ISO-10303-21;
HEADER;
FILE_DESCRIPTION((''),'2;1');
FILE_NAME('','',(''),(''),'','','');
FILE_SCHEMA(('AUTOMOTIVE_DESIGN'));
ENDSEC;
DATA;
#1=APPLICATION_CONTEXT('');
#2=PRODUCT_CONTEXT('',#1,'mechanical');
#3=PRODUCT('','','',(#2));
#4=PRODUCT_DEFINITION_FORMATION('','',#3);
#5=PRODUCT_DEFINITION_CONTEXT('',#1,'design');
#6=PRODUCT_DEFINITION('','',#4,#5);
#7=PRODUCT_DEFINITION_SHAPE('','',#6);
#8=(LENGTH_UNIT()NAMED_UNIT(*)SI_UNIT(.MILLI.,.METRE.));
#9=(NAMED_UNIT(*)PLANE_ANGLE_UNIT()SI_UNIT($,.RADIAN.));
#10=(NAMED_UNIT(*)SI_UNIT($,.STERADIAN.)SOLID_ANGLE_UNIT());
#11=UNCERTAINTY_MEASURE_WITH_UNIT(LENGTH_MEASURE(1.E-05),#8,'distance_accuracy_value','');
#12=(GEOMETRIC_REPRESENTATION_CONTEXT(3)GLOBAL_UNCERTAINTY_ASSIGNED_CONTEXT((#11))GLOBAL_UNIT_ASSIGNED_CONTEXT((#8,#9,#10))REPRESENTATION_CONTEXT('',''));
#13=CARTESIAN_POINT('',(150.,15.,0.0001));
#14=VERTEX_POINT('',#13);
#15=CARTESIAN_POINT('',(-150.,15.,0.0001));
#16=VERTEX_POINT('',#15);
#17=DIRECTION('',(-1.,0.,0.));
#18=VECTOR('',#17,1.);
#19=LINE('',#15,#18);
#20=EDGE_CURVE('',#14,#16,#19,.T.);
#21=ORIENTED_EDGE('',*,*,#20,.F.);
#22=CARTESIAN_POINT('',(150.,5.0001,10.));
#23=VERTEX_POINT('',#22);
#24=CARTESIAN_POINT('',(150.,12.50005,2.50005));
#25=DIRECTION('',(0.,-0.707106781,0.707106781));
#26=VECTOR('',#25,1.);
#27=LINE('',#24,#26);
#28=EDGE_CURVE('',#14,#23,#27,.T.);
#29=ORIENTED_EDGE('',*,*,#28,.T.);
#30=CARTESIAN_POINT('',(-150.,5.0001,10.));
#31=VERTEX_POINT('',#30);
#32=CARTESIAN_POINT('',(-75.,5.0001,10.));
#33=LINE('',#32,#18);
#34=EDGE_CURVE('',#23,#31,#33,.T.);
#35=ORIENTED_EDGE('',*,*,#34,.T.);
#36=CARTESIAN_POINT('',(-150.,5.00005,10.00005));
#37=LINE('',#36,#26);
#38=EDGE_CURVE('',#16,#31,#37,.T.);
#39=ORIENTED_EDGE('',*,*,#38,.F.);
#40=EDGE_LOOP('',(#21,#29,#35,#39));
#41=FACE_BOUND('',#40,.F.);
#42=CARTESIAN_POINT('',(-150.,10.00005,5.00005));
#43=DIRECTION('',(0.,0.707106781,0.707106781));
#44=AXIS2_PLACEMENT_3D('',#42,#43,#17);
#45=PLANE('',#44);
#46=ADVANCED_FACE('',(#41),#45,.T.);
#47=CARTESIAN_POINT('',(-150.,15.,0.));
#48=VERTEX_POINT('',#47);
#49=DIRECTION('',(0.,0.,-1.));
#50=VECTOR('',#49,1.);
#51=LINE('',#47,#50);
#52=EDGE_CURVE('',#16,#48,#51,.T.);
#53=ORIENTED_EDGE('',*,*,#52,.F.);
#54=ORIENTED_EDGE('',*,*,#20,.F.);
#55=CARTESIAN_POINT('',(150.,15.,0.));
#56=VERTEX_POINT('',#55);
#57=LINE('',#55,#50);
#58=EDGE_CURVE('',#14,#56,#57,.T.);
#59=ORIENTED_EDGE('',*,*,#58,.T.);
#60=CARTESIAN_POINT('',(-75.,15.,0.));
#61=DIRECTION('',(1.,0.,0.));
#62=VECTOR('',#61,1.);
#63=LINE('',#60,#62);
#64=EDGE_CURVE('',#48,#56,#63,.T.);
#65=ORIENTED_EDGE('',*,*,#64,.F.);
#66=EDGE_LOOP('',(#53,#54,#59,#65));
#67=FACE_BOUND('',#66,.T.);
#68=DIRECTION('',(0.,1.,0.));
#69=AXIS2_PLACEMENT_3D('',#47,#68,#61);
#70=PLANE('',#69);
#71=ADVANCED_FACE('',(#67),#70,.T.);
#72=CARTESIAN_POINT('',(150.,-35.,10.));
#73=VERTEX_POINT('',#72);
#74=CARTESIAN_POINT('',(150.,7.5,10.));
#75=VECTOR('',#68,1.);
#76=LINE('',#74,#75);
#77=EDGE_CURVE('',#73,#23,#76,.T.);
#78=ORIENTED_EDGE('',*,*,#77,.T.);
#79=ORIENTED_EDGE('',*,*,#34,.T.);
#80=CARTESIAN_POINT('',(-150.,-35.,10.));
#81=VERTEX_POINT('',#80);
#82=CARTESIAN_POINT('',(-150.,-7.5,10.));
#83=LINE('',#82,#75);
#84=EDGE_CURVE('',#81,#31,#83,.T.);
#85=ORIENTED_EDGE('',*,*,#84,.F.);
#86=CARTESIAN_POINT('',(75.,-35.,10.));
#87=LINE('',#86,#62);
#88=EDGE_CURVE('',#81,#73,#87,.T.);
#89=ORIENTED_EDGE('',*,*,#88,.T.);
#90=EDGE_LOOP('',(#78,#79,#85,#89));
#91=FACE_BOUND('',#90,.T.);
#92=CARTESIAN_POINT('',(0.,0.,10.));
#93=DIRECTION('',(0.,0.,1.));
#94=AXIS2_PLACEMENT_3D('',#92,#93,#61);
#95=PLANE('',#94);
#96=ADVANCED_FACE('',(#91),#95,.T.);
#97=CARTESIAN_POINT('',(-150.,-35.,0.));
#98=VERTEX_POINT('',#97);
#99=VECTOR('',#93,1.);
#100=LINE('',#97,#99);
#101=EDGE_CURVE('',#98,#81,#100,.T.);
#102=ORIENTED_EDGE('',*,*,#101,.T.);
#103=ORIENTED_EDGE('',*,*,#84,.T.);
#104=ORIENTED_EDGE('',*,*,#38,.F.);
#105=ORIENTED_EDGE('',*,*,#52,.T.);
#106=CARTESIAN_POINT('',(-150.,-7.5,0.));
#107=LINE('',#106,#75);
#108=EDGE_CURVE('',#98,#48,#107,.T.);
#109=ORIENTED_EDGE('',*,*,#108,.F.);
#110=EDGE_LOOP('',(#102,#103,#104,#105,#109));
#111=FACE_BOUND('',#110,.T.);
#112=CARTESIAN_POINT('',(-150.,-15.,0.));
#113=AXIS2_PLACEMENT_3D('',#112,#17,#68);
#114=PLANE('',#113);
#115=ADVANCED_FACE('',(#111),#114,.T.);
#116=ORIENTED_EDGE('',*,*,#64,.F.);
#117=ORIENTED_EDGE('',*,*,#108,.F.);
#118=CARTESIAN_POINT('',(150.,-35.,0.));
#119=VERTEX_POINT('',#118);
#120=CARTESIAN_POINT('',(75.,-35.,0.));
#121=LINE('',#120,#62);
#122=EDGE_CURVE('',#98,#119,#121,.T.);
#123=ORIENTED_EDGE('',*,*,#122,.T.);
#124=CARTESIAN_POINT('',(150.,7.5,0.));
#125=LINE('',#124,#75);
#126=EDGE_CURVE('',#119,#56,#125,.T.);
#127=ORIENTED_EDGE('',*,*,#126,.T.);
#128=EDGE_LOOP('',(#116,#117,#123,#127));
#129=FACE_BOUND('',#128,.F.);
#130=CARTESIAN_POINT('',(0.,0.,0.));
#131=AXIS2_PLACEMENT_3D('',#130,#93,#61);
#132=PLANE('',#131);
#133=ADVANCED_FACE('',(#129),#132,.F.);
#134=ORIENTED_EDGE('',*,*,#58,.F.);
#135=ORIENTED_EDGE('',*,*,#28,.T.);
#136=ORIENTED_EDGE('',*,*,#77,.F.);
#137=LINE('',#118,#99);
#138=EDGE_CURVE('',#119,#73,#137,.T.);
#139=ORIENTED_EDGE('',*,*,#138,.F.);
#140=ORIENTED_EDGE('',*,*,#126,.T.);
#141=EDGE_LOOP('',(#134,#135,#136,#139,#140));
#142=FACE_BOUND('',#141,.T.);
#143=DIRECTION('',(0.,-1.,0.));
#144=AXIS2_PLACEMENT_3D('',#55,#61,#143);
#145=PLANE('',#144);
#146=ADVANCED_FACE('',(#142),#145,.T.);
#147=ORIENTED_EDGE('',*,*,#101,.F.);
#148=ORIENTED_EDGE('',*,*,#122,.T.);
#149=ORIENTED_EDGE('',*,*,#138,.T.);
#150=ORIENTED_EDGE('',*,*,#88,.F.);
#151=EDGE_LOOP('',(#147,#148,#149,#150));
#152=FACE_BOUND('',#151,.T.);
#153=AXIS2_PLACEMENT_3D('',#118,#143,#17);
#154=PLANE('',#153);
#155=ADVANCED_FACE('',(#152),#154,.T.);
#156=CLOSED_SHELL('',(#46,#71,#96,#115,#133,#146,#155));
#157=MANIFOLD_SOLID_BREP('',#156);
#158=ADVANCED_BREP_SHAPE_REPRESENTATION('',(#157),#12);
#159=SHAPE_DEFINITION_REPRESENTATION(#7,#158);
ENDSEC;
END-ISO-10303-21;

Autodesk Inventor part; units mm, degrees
ref_plane "YZ Plane" through (0, 0, 0) normal (1, 0, 0) x (0, 1, 0)
ref_plane "XZ Plane" through (0, 0, 0) normal (0, 1, 0) x (-1, 0, 0)
ref_plane "XY Plane" through (0, 0, 0) normal (0, 0, 1) x (1, 0, 0)
sketch "Sketch1" plane through (0, 0, 0) normal (0, 0, 1) x (1, 0, 0)
  line L0 (150, -15) -> (-150, -15)
  line L1 (-150, -15) -> (-150, 15)
  line L2 (-150, 15) -> (150, 15)
  line L3 (150, 15) -> (150, -15)
  line L4 (150, -15) -> (-150, 15) construction
  line L5 (-150, -15) -> (150, 15) construction
  point P0 (0, 0)
  dimension "d0" = 300
  dimension "d1" = 30
extrude "Extrusion1" add sketch "Sketch1" along normal blind 10
chamfer "Chamfer1" distance 10 angle 45 1 edges at (0, 15, 10)
thicken "Thicken1" operation add thickness 20 both sides no extend neighbours yes toward (0, -1, 0) faces at (-50, -15, 3.3333)
properties part number "ball_ramp"
